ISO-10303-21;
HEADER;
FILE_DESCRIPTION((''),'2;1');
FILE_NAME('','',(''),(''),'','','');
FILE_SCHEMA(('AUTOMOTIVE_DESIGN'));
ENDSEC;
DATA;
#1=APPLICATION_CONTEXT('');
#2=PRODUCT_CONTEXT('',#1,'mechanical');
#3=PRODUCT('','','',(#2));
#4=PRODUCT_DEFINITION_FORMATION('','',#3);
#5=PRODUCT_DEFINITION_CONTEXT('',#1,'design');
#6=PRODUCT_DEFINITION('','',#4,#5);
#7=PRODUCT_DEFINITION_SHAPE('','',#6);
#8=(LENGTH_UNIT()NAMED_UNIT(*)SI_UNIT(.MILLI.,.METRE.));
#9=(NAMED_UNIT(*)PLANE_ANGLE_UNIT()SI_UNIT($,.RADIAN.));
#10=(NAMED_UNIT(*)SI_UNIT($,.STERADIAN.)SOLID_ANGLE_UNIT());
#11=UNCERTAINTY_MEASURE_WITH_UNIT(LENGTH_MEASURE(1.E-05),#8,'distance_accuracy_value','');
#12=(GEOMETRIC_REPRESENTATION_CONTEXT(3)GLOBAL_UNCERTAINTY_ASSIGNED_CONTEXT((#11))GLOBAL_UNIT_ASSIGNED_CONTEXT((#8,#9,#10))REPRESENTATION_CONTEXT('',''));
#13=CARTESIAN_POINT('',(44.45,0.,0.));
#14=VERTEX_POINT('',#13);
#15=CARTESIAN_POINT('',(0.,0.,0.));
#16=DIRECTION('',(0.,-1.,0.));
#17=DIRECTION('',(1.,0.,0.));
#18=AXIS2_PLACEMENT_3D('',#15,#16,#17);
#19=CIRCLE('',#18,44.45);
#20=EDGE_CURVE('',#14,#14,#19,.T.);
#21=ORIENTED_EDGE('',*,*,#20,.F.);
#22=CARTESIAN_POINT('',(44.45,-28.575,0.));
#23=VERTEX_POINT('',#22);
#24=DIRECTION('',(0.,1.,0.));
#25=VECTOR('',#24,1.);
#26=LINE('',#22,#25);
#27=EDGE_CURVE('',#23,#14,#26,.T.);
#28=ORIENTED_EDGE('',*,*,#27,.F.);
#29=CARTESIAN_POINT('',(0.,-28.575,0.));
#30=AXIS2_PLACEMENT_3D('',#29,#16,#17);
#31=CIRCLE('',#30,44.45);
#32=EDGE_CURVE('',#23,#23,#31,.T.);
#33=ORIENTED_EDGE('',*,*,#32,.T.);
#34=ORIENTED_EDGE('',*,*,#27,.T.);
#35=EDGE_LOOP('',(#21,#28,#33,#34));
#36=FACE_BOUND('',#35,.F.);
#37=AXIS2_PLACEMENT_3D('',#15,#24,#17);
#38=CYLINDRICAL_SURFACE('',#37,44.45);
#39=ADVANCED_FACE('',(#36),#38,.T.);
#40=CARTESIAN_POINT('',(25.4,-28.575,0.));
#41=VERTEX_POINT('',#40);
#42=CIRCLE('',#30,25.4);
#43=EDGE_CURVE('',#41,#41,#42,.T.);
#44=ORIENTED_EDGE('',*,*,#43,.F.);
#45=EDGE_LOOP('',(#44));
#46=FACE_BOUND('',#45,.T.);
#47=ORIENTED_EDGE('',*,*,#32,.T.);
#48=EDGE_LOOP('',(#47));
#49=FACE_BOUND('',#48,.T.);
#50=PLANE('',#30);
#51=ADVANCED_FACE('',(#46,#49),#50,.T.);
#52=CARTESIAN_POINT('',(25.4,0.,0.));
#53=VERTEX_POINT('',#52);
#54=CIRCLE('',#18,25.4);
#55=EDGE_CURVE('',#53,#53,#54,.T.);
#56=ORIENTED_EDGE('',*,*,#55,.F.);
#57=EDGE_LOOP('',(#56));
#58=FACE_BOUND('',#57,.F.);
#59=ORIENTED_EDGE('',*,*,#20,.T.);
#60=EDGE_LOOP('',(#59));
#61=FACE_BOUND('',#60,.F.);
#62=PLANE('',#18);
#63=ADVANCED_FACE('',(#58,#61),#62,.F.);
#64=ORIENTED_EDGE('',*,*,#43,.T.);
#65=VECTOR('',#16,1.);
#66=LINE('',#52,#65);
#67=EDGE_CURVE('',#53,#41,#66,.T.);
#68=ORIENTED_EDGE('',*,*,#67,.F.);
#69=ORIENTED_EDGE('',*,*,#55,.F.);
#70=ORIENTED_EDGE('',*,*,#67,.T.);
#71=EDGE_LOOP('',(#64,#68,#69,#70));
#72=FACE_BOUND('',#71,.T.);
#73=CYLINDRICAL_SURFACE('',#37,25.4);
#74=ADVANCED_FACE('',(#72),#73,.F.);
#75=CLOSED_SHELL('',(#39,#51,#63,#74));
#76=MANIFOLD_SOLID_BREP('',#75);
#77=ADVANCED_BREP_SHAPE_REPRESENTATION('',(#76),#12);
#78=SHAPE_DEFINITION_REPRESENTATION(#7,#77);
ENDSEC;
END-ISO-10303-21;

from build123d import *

# Parameters (mm, degrees)
F0_R        = 44.45
F0_R_2      = 25.4
F2_DEPTH    = 3.175
F2_FACE_R   = 44.45
F2_FACE_R_2 = 25.4
F3_DEPTH    = 25.4


# Not quite as in the source:
# - the program builds the solid bodies; features that only make, move or delete a surface that nothing else refers to are left out


with BuildPart() as f2:
    # F0 (on Front) → F2 (new body)
    with BuildSketch(Plane.XZ):
        Circle(F0_R)
        Circle(F0_R_2, mode=Mode.SUBTRACT)
    extrude(amount=F2_DEPTH)

    # F0 (on Front) + F2_face (on face) → F3 (join)
    with BuildSketch(Plane.XZ):
        Circle(F0_R)
        Circle(F0_R_2, mode=Mode.SUBTRACT)
    with BuildSketch(Plane.XZ.offset(3.175)):
        Circle(F2_FACE_R)
        Circle(F2_FACE_R_2, mode=Mode.SUBTRACT)
    extrude(amount=F3_DEPTH)


solid = f2.part
